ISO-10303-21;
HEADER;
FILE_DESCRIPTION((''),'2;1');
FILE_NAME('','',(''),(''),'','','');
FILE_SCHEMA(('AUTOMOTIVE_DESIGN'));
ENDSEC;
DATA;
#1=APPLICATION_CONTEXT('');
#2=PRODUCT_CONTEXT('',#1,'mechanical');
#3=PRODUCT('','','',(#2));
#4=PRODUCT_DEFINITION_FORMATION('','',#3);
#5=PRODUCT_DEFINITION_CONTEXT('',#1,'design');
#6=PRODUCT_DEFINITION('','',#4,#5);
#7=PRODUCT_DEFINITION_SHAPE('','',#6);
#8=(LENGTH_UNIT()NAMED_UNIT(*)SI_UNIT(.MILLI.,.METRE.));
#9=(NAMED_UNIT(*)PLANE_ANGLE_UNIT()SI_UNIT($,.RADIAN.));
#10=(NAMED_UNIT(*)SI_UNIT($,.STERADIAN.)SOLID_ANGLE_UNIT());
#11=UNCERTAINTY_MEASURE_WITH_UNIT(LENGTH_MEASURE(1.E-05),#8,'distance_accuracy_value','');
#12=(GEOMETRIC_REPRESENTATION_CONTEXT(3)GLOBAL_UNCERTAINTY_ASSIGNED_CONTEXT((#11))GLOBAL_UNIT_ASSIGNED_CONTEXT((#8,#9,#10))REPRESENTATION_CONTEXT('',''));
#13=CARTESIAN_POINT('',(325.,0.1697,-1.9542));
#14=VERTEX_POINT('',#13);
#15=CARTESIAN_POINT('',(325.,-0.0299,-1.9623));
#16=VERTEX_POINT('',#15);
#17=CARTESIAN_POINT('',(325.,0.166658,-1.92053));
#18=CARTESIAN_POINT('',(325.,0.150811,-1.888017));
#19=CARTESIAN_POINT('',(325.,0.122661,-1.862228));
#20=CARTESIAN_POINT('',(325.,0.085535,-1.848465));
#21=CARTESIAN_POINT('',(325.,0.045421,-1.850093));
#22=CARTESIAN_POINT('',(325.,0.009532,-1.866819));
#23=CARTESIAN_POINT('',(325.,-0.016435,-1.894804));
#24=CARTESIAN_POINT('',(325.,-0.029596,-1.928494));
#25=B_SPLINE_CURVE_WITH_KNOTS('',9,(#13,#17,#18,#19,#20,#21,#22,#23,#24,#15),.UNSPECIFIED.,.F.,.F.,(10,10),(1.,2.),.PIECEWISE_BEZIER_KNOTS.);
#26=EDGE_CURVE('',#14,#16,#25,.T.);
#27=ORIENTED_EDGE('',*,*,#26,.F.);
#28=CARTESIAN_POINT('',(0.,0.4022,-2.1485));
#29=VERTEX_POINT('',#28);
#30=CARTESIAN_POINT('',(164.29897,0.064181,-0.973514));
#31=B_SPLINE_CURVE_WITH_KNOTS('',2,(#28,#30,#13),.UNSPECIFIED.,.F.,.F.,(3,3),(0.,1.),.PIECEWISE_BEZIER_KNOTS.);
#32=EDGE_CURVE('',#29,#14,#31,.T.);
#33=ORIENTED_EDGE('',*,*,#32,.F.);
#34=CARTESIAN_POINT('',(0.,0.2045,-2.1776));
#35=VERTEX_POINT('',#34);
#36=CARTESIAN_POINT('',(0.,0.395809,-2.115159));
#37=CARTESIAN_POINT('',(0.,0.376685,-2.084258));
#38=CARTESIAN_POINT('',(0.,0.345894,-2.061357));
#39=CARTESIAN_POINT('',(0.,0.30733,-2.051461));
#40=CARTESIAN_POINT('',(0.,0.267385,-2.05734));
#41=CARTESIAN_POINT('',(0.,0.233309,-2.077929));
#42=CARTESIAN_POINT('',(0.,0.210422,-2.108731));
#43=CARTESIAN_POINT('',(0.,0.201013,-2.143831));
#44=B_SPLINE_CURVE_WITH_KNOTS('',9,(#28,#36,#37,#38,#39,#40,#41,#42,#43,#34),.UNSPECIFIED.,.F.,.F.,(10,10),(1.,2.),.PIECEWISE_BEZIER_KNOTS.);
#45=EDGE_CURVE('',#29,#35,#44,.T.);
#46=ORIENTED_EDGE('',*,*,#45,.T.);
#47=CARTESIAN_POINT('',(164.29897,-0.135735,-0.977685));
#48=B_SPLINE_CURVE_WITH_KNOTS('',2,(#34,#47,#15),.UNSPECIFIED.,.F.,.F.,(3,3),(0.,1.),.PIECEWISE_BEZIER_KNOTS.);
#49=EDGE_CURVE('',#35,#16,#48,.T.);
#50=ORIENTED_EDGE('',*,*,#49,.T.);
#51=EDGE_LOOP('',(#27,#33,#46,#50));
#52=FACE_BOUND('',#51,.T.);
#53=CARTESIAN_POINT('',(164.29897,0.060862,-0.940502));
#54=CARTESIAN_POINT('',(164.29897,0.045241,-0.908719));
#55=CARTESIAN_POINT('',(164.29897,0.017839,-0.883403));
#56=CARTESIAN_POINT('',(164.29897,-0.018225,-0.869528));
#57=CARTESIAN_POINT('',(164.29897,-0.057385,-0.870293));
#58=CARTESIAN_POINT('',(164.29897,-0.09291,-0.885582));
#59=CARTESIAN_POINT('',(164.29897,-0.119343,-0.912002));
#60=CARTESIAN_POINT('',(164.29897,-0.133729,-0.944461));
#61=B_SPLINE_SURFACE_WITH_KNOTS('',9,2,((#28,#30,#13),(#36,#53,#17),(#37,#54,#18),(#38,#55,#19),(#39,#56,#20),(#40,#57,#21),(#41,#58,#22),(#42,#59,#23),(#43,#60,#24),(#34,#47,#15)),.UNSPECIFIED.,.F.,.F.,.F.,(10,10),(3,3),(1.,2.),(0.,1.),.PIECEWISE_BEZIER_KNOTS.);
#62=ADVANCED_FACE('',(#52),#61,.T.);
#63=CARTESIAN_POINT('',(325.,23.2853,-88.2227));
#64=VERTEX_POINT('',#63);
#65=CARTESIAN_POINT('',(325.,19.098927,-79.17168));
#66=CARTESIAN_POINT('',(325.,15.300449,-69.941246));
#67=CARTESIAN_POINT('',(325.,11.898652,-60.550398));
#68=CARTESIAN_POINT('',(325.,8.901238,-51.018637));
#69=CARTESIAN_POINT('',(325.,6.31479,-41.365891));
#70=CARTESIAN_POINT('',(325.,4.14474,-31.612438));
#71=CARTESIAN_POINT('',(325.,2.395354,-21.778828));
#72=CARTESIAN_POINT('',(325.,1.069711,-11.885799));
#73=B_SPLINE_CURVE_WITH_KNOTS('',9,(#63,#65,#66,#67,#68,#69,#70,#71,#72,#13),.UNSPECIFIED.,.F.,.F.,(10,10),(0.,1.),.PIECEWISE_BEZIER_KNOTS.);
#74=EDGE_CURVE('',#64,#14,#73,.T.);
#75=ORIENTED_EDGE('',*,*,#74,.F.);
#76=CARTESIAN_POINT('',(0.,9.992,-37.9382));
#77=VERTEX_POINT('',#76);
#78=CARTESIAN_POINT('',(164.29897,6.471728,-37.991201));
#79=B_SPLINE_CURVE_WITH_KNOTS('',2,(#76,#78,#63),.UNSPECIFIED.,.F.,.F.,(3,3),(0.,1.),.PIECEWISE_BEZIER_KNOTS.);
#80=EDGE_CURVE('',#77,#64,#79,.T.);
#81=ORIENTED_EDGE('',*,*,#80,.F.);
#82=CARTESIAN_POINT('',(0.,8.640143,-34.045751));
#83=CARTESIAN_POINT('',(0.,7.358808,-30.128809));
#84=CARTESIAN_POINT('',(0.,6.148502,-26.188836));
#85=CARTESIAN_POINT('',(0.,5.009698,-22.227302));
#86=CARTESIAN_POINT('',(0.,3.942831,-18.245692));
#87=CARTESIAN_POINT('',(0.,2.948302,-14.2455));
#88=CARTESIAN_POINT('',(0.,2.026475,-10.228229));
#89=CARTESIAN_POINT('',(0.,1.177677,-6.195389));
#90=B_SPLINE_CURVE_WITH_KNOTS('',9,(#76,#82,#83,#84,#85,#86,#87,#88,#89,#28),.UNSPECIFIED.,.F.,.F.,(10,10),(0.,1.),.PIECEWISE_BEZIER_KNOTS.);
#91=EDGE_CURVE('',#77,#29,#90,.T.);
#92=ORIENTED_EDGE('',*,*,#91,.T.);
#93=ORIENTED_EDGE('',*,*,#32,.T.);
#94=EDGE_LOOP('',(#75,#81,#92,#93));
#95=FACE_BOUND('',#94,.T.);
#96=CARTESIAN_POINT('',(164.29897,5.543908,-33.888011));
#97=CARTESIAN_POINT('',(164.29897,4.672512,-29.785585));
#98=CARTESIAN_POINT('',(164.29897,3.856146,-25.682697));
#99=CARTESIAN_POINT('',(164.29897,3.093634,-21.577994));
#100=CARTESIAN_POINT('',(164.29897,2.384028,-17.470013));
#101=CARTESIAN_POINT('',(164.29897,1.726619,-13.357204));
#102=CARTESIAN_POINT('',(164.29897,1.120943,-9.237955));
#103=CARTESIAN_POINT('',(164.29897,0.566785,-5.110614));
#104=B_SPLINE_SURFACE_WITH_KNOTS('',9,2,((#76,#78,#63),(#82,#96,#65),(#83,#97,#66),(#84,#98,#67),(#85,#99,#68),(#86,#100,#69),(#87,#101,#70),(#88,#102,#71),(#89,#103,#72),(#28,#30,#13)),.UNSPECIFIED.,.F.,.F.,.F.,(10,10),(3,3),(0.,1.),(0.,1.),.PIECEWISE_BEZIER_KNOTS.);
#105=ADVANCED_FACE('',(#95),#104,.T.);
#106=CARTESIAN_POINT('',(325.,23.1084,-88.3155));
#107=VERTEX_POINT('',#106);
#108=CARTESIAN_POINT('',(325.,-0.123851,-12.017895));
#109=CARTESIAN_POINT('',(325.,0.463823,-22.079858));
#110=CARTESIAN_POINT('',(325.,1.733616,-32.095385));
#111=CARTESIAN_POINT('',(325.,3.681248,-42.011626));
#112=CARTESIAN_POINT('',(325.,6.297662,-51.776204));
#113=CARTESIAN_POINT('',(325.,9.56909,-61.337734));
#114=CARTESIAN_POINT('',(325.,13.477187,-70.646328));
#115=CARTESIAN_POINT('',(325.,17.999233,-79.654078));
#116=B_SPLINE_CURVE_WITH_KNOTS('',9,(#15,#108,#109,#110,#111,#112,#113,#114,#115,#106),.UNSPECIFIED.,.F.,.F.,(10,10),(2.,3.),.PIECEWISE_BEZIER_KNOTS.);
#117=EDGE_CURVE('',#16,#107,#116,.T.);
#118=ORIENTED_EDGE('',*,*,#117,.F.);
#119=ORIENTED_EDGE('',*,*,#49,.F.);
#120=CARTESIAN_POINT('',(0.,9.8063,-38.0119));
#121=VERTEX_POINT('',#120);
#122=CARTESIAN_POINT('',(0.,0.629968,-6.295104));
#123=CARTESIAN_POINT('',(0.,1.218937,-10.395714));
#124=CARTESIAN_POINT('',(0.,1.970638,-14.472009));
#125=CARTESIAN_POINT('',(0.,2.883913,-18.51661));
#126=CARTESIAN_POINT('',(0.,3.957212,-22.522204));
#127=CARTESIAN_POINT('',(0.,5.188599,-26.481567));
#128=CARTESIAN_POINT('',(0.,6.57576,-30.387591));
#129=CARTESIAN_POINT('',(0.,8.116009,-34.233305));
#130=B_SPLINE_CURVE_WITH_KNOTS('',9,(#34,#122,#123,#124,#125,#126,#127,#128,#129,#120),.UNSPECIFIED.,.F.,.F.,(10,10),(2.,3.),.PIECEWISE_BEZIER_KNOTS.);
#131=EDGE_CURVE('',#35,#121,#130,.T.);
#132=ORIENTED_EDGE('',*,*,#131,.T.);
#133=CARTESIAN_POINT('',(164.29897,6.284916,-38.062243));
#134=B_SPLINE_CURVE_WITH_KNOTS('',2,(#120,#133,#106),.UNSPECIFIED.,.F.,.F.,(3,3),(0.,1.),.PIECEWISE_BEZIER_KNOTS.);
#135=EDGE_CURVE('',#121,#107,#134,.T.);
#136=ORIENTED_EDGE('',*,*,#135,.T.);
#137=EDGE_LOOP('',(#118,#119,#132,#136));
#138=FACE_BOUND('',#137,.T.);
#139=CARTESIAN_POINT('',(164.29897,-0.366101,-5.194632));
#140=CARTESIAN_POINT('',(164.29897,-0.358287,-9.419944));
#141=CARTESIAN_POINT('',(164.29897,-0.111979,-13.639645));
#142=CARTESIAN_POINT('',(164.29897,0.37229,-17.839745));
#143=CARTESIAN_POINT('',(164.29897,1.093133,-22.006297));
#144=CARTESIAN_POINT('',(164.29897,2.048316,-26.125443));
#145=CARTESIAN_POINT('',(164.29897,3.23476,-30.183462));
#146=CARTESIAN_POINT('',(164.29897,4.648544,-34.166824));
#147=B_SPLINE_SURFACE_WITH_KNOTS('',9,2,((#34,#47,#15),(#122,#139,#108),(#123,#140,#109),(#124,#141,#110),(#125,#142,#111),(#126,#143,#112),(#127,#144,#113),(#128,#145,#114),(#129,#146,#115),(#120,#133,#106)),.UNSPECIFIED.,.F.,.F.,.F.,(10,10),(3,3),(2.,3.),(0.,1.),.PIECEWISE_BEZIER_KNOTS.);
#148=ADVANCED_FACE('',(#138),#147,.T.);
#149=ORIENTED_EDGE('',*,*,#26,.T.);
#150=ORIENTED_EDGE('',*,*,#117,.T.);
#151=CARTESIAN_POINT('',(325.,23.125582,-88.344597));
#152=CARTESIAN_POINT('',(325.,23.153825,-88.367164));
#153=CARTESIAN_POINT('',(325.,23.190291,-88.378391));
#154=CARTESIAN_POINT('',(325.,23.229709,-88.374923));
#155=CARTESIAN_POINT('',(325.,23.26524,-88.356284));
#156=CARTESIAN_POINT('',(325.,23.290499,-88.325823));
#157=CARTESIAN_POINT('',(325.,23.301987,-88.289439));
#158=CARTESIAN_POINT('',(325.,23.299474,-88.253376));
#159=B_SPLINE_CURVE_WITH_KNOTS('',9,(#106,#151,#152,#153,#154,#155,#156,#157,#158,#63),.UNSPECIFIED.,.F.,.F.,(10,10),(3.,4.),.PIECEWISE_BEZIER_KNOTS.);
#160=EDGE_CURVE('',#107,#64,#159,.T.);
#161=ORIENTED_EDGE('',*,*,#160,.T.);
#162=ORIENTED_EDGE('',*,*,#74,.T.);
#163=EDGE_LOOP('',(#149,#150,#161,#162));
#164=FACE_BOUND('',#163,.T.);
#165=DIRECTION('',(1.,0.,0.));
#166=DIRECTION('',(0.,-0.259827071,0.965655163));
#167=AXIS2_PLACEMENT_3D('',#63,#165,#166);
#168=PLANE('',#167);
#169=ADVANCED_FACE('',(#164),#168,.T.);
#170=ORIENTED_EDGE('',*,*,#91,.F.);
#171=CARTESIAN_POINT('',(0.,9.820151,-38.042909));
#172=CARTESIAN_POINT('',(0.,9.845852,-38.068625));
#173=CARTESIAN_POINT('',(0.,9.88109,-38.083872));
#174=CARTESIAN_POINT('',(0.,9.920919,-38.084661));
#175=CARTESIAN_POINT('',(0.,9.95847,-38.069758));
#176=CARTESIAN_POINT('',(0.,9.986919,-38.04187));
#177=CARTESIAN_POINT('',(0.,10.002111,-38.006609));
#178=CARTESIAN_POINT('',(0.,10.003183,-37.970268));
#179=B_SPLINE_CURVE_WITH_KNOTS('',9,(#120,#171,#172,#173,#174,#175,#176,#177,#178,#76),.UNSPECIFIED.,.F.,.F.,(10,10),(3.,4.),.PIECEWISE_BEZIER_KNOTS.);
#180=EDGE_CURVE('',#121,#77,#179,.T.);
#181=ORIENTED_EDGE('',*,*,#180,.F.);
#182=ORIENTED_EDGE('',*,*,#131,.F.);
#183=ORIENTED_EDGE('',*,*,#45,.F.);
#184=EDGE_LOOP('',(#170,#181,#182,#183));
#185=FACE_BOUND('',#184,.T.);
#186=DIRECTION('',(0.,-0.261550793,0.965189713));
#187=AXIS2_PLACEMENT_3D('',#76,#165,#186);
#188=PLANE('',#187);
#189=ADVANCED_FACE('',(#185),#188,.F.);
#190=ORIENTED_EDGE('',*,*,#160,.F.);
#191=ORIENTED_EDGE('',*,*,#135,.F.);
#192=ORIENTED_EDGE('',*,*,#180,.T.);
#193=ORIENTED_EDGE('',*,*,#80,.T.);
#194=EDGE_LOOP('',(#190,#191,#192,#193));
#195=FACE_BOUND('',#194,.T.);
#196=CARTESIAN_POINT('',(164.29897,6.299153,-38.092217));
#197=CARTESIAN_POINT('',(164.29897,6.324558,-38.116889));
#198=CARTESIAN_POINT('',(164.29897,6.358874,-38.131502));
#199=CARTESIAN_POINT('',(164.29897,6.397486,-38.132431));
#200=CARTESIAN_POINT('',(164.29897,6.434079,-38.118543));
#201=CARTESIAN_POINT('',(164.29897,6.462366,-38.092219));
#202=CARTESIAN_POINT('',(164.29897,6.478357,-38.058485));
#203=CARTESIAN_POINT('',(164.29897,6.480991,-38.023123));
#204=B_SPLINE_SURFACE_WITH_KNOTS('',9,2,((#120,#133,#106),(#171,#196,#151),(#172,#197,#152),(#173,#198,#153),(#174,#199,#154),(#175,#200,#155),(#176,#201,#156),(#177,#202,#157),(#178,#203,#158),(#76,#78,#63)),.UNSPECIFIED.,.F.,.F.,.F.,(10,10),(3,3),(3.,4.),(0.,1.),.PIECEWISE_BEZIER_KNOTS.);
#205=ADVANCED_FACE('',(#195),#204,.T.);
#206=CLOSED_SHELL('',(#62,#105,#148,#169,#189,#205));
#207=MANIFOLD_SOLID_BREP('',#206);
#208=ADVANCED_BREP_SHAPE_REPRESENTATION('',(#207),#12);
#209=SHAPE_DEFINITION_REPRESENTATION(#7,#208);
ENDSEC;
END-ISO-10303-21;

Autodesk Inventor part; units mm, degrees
ref_plane "XZ Plane" through (0, 0, 0) normal (0, 1, 0) x (-1, 0, 0)
ref_plane "作業平面1" through (150, 0, 0) normal (1, 0, 0) x (0, 1, 0)
ref_plane "作業平面2" through (325, 0, 0) normal (1, 0, 0) x (0, 1, 0)
sketch "スケッチ2" plane through (0, 0, 0) normal (1, 0, 0) x (0, 1, 0)
  arc A0 (0.4022, -2.1485) -> (9.992, -37.9382) centre (251.688, 46.0036) ccw
  arc A1 (0.2045, -2.1776) -> (9.8063, -38.0119) centre (116.8603, 9.8767) ccw
  line L0 (0, -57.2007) -> (0, 63.2044) projected
  line L1 (0, 0) -> (10.718, -40)
  arc A2 (9.8063, -38.0119) -> (9.992, -37.9382) centre (9.8976, -37.9711) ccw
  arc A3 (0.4022, -2.1485) -> (0.2045, -2.1776) centre (0.304, -2.1673) ccw
  dimension "d6" = 40
  dimension "d8" = 15
  dimension "d9" = 0.1
  dimension "d10" = 0.1
sketch "スケッチ3" plane through (150, 0, 0) normal (1, 0, 0) x (0, 1, 0)
  line L0 (0, 0) -> (11.5434, -50)
  arc A0 (0.1854, -1.5241) -> (11.0419, -48.5488) centre (234.0668, 27.7061) ccw
  arc A1 (-0.0138, -1.5364) -> (10.8575, -48.6252) centre (106.5896, -1.7244) ccw
  line L1 (0, -65.5412) -> (0, 43.2473) projected
  arc A2 (10.8575, -48.6252) -> (11.0419, -48.5488) centre (10.9473, -48.5812) ccw
  arc A3 (0.1854, -1.5241) -> (-0.0138, -1.5364) centre (0.0862, -1.5365) ccw
  dimension "d11" = 13
  dimension "d12" = 50
  dimension "d13" = 0.1
sketch "スケッチ4" plane through (325, 0, 0) normal (1, 0, 0) x (0, 1, 0)
  line L0 (0, 0) -> (24.1154, -90)
  arc A0 (0.1697, -1.9542) -> (23.2853, -88.2227) centre (260.8799, 21.6717) ccw
  arc A1 (-0.0299, -1.9623) -> (23.1084, -88.3155) centre (166.8575, -3.5215) ccw
  line L1 (0, -112.3343) -> (0, 44.0061) projected
  arc A2 (23.1084, -88.3155) -> (23.2853, -88.2227) centre (23.1945, -88.2647) ccw
  arc A3 (0.1697, -1.9542) -> (-0.0299, -1.9623) centre (0.0701, -1.9632) ccw
  dimension "d18" = 15
  dimension "d19" = 90
  dimension "d20" = 0.1
loft "ロフト2" add profiles "スケッチ2", "スケッチ3", "スケッチ4"
properties part number "test_front_element_3"
